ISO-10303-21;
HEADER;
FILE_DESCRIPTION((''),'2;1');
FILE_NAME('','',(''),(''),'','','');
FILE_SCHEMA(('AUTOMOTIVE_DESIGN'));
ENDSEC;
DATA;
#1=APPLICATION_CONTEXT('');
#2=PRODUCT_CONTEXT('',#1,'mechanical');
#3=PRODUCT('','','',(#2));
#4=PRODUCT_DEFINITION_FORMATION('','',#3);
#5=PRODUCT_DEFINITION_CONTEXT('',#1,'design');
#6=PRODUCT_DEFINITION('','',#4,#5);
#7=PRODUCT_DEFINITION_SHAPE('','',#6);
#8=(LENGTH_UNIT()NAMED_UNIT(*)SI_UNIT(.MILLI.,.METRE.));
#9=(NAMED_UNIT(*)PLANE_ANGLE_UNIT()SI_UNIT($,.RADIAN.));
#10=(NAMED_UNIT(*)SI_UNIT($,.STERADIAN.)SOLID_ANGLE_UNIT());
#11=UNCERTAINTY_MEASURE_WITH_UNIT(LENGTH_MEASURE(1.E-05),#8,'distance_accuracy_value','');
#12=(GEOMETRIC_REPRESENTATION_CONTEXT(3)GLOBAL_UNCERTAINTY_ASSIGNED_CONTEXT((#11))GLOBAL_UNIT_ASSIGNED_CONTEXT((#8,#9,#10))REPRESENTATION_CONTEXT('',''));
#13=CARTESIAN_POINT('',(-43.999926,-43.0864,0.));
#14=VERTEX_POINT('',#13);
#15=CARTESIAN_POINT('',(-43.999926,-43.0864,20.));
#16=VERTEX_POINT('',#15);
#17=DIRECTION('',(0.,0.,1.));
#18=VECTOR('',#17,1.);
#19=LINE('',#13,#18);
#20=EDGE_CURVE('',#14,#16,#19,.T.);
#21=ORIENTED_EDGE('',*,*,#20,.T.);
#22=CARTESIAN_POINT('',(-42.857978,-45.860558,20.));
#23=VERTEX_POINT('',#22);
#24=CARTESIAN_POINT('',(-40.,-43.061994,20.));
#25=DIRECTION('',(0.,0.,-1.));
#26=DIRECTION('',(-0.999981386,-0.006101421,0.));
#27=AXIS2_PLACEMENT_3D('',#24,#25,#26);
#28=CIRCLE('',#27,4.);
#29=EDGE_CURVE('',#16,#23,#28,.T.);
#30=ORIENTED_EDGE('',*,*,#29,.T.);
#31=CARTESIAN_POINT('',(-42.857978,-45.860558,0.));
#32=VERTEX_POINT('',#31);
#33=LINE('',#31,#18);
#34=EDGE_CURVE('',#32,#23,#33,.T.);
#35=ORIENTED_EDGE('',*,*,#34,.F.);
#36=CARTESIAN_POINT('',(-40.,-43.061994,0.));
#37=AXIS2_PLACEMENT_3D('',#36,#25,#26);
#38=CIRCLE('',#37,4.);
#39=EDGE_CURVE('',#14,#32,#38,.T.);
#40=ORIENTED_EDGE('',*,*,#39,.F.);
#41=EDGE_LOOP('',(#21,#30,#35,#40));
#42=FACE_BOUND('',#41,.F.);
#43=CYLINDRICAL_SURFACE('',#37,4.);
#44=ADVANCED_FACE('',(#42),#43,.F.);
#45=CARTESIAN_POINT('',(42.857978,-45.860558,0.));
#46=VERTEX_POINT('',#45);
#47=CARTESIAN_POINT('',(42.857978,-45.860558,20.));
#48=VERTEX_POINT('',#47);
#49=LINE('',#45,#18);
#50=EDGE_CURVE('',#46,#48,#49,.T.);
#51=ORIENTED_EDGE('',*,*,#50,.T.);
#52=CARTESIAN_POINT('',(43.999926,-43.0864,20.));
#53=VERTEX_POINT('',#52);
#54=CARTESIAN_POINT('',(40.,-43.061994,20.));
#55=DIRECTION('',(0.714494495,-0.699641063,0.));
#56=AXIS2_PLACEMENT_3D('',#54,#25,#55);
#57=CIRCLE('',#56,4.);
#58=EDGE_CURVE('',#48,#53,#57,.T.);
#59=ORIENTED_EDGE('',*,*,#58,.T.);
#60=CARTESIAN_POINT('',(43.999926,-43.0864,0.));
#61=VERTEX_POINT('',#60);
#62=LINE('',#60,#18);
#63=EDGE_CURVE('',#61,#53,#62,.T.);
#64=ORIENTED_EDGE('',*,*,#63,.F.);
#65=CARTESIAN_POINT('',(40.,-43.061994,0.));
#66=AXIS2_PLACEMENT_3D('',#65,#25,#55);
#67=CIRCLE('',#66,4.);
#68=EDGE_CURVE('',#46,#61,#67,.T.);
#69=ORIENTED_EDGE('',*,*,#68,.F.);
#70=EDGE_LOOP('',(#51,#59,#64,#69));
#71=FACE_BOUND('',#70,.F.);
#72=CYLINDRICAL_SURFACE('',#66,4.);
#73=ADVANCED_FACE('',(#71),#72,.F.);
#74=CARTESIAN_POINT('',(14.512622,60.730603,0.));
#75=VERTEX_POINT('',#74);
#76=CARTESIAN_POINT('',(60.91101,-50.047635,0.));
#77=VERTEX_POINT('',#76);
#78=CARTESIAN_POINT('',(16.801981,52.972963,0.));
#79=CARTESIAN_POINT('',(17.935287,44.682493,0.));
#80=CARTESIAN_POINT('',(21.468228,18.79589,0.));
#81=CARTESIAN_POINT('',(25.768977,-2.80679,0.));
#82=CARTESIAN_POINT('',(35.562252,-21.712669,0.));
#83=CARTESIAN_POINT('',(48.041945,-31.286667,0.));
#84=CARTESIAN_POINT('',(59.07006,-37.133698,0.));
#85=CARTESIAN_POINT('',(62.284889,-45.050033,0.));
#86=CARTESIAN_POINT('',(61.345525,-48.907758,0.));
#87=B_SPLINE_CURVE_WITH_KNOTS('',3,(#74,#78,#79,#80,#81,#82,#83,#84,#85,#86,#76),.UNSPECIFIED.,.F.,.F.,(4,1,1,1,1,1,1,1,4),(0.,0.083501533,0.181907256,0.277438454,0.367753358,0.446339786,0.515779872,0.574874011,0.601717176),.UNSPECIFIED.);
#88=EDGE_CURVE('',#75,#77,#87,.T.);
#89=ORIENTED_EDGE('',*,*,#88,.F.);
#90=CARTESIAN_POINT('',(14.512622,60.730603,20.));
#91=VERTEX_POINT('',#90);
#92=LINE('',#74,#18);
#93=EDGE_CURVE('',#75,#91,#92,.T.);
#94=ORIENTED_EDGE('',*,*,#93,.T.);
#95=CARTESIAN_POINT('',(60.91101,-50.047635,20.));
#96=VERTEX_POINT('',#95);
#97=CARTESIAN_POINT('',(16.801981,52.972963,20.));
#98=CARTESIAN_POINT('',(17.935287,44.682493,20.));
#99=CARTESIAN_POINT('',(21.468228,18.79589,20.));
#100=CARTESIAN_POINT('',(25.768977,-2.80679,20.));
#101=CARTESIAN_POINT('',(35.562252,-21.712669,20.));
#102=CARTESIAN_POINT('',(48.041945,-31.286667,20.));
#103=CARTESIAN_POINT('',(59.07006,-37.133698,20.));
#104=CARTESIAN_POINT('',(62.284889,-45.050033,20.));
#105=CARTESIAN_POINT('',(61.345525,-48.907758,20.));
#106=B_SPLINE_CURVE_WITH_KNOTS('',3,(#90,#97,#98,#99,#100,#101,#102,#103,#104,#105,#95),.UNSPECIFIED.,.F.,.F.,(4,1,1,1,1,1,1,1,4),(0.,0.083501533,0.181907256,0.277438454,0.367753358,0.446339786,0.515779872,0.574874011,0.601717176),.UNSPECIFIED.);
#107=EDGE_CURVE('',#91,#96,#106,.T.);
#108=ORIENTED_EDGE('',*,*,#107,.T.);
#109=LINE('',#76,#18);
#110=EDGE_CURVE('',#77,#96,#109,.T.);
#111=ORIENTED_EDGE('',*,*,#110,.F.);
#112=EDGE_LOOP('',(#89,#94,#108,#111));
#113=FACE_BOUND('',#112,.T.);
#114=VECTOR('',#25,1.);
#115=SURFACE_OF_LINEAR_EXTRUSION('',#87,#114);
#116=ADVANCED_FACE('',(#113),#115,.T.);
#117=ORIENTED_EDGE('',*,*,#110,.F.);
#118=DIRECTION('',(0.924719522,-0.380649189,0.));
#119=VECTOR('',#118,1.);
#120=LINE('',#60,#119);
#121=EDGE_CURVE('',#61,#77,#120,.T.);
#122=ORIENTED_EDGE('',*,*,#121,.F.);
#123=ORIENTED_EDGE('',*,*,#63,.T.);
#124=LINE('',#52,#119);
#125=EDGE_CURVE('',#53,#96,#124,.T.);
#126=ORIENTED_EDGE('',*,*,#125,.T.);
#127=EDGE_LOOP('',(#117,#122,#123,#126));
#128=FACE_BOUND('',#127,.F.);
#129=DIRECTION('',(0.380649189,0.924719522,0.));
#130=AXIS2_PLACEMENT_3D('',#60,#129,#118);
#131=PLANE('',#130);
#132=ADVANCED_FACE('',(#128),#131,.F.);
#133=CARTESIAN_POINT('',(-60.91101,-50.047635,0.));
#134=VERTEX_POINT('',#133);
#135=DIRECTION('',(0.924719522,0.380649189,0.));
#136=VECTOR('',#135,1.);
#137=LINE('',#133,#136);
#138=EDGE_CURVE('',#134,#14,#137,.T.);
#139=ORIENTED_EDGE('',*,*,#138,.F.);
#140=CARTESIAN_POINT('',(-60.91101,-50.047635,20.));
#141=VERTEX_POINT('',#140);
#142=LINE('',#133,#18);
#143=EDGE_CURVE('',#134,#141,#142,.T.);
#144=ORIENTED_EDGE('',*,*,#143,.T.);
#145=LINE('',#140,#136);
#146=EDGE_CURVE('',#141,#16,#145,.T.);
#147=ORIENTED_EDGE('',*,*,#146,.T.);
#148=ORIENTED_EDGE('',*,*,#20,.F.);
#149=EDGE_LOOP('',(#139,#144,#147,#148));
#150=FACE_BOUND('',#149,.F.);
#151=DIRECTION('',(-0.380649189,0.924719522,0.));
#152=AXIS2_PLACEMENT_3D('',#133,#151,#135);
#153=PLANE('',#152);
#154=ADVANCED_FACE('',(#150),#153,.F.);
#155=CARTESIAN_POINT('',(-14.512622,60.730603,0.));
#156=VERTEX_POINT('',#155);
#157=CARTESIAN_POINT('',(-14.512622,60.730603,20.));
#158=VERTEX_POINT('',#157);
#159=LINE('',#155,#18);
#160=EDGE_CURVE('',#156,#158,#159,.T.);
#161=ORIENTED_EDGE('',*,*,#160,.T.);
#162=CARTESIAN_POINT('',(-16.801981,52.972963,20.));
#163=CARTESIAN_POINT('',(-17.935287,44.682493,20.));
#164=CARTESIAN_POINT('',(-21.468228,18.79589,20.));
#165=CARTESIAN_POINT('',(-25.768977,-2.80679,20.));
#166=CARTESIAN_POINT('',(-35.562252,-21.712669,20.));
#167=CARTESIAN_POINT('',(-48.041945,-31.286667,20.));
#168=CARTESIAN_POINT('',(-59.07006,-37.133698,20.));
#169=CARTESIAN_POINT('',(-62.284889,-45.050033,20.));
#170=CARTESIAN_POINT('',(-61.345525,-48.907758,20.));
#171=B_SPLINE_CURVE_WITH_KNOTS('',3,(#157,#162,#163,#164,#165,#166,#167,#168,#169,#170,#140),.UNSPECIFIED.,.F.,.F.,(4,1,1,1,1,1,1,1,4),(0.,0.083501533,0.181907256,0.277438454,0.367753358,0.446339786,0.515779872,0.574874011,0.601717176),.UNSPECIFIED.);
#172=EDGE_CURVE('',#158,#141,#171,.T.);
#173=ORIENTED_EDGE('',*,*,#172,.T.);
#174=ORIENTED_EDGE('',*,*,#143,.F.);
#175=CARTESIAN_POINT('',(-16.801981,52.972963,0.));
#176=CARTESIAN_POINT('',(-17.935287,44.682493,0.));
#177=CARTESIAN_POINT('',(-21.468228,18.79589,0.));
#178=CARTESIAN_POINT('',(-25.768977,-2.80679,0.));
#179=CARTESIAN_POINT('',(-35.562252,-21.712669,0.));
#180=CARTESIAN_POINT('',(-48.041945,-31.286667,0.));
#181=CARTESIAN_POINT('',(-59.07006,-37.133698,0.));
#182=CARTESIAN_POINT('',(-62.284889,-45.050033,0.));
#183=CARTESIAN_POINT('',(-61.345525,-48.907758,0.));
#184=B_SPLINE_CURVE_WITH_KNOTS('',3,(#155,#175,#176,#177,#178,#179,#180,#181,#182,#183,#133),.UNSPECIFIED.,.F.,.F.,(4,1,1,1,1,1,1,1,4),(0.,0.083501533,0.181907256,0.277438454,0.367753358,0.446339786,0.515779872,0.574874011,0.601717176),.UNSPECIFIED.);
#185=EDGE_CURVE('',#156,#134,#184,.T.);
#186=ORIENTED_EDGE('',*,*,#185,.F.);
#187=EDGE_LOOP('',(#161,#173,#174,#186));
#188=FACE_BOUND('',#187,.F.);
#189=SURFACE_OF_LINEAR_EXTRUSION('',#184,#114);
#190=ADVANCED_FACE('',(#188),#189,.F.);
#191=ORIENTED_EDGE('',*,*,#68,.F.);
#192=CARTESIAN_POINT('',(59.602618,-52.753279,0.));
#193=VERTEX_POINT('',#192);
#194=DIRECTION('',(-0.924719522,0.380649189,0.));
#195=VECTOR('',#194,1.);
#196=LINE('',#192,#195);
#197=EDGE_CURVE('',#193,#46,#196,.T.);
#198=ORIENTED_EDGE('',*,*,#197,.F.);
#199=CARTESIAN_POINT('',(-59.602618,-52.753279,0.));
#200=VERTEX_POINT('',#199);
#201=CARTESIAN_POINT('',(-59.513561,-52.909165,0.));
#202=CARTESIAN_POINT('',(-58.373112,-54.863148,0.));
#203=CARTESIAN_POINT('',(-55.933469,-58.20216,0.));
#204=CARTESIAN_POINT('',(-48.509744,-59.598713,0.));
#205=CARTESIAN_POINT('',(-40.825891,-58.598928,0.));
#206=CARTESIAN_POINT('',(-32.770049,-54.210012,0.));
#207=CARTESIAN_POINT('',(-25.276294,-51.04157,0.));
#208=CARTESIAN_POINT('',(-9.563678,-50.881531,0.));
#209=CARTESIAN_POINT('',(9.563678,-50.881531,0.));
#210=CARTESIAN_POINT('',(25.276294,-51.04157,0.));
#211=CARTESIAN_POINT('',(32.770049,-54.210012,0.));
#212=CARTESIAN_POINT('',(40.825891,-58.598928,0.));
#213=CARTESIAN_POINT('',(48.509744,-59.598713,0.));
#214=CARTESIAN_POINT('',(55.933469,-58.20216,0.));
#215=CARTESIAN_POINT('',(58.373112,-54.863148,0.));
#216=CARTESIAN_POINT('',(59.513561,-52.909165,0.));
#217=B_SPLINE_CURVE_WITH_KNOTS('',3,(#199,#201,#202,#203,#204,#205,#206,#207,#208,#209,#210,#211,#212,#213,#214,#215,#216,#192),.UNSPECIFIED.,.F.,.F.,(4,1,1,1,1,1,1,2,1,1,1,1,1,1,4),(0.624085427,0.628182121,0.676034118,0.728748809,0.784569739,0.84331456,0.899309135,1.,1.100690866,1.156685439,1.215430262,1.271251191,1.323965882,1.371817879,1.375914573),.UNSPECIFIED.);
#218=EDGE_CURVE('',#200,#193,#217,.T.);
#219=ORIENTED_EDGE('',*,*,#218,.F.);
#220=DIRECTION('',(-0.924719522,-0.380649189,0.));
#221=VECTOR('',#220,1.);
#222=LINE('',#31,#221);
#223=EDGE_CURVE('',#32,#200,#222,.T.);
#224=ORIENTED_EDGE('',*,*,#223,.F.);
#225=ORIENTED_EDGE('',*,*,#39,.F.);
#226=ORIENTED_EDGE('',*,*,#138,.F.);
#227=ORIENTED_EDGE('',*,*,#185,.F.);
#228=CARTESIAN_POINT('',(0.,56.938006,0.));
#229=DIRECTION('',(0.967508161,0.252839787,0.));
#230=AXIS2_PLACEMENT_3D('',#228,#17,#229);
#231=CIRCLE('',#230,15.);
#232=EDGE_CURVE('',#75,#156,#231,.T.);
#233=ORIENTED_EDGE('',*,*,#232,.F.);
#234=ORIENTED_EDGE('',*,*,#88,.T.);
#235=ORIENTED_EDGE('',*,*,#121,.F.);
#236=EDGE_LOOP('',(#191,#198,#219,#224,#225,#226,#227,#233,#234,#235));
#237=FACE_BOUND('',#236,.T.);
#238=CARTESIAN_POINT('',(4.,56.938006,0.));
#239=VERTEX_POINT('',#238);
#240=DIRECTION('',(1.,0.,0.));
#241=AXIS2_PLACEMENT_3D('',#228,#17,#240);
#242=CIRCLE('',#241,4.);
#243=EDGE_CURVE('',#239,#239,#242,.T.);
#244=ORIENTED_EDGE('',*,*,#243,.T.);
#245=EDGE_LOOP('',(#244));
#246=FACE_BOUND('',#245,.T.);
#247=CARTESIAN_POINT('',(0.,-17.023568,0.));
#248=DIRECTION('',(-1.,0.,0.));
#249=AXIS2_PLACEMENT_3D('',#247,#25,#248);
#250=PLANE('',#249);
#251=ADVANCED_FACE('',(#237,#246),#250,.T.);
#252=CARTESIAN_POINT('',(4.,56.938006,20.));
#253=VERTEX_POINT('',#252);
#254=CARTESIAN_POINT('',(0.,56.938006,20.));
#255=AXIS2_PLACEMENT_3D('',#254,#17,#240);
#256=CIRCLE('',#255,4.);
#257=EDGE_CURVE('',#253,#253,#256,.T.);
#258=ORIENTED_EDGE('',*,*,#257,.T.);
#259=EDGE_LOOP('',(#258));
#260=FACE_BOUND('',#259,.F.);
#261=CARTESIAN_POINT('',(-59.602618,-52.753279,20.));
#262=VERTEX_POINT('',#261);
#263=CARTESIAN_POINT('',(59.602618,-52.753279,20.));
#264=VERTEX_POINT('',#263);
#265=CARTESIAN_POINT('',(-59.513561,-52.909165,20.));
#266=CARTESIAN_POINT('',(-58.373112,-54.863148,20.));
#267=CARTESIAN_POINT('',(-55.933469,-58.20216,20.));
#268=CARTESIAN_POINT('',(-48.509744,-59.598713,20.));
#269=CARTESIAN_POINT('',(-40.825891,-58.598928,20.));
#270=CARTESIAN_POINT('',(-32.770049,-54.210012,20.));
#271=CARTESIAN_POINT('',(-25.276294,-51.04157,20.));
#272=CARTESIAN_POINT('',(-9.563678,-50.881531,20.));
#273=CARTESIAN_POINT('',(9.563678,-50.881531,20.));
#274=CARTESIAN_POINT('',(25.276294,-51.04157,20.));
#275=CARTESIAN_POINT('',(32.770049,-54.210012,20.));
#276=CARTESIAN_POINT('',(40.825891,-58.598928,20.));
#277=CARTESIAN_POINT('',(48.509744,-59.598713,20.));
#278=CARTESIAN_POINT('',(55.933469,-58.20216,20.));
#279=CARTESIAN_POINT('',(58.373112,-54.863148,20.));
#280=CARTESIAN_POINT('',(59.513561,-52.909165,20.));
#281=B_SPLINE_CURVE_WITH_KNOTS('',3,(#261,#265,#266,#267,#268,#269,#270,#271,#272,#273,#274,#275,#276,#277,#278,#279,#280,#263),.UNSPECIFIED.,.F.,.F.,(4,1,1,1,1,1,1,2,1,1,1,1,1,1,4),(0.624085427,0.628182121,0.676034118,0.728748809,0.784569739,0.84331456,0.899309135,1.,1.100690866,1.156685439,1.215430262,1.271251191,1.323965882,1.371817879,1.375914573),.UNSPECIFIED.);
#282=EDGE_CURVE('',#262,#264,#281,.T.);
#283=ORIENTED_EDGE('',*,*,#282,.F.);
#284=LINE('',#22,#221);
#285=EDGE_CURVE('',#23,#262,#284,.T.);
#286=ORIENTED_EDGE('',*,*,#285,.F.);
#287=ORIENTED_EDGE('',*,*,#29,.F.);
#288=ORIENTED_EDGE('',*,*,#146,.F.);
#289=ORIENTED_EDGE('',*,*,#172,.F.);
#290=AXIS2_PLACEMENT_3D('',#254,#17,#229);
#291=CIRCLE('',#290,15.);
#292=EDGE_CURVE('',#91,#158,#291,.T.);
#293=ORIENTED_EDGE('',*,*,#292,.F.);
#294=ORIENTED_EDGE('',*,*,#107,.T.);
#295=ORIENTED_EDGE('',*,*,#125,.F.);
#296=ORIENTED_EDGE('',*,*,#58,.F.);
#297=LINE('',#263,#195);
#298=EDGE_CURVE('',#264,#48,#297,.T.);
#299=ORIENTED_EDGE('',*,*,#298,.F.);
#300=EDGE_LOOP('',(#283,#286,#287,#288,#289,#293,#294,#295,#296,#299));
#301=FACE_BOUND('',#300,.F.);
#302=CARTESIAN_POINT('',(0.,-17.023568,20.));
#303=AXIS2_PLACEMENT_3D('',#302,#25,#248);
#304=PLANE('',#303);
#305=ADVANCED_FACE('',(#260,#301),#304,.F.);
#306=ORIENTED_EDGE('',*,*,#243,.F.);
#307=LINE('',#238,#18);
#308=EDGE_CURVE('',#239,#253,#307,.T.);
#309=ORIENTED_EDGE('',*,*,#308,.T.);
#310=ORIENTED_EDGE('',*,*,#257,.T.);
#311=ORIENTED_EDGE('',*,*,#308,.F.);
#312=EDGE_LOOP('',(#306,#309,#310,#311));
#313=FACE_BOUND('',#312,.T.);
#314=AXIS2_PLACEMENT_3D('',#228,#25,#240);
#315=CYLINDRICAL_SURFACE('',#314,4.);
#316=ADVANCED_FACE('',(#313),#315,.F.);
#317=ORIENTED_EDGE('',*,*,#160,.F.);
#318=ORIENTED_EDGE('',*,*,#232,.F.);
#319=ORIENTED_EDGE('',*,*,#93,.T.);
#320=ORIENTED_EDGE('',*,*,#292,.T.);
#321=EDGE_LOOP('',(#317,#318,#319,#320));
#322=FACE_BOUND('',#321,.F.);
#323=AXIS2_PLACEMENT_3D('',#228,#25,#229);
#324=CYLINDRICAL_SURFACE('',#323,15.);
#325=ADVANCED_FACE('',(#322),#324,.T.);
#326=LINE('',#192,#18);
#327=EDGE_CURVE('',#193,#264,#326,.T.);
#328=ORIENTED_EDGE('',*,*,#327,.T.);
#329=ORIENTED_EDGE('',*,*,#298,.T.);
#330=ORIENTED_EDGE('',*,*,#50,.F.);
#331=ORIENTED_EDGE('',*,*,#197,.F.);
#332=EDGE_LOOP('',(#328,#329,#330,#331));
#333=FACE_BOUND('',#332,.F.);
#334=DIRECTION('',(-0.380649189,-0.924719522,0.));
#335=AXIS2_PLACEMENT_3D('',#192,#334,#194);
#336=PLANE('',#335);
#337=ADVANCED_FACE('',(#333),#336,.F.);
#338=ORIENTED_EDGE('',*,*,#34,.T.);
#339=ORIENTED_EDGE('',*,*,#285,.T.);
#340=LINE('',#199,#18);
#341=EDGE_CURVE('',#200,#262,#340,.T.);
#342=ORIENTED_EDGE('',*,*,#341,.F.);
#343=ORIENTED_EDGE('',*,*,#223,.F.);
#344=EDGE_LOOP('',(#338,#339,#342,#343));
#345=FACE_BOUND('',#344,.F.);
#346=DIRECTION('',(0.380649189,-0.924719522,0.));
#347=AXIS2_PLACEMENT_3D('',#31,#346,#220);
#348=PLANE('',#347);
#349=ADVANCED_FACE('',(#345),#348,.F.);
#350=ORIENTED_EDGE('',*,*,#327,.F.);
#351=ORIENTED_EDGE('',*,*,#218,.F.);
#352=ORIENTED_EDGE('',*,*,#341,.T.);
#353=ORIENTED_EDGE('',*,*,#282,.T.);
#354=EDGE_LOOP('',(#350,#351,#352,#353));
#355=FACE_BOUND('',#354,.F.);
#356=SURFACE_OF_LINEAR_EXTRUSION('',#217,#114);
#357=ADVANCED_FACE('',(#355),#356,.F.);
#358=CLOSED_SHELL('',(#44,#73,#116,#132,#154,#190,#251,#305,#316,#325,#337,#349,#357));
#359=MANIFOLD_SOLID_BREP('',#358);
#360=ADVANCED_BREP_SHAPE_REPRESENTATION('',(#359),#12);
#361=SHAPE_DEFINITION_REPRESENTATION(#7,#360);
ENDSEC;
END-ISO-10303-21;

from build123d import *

# Parameters (mm, degrees)
F0_R     = 4
F1_DEPTH = 20


# Not quite as in the source:
# - a feature names something its author has since deleted; it is built from what else it names


with BuildPart() as f1:
    # F0 (on Top) → F1 (new body)
    with BuildSketch(Plane.XY):
        with BuildLine():
            add(Edge.make_bspline(
                [(14.5126224198, 60.7306027855), (16.8019810413, 52.9729625014), (17.9352869071, 44.6824925706), (21.4682283194, 18.795889632), (25.7689771102, -2.8067896835), (35.5622516207, -21.7126685978), (48.041945088, -31.286667461), (59.0700601288, -37.1336977452), (62.2848892569, -45.05003275), (61.3455249019, -48.9077577206), (60.9110098166, -50.047635349)],
                knots=[0, 0, 0, 0, 0.0835015327, 0.1819072556, 0.277438454, 0.367753358, 0.4463397859, 0.5157798719, 0.5748740106, 0.6017171757, 0.6017171757, 0.6017171757, 0.6017171757], degree=3))
            ThreePointArc((14.5126224198, 60.7306027855), (0, 71.9380059838), (-14.5126224198, 60.7306027855))
            add(Edge.make_bspline(
                [(-14.5126224198, 60.7306027855), (-16.8019810413, 52.9729625014), (-17.9352869071, 44.6824925706), (-21.4682283194, 18.795889632), (-25.7689771102, -2.8067896835), (-35.5622516207, -21.7126685978), (-48.041945088, -31.286667461), (-59.0700601288, -37.1336977452), (-62.2848892569, -45.05003275), (-61.3455249019, -48.9077577206), (-60.9110098166, -50.047635349)],
                knots=[0, 0, 0, 0, 0.0835015327, 0.1819072556, 0.277438454, 0.367753358, 0.4463397859, 0.5157798719, 0.5748740106, 0.6017171757, 0.6017171757, 0.6017171757, 0.6017171757], degree=3))
            Line((-60.9110098166, -50.047635349), (-43.9999255446, -43.0863997004))
            ThreePointArc((-43.9999255446, -43.0863997004), (-36.30112191, -41.5393972621), (-42.8579779791, -45.8605582679))
            Line((-42.8579779791, -45.8605582679), (-59.6026177667, -52.753279133))
            add(Edge.make_bspline(
                [(-59.6026177667, -52.753279133), (-59.5135605178, -52.9091652101), (-58.3731115182, -54.8631475989), (-55.9334692098, -58.202160494), (-48.5097440275, -59.5987131413), (-40.8258914603, -58.598927537), (-32.7700485865, -54.2100123222), (-25.276293749, -51.041569904), (-9.563678396, -50.8815310895), (0, -50.8815310895)],
                knots=[0.6240854269, 0.6240854269, 0.6240854269, 0.6240854269, 0.6281821208, 0.6760341184, 0.7287488094, 0.7845697385, 0.8433145605, 0.8993091345, 1, 1, 1, 1], degree=3))
            add(Edge.make_bspline(
                [(59.6026177667, -52.753279133), (59.5135605178, -52.9091652101), (58.3731115182, -54.8631475989), (55.9334692098, -58.202160494), (48.5097440275, -59.5987131413), (40.8258914603, -58.598927537), (32.7700485865, -54.2100123222), (25.276293749, -51.041569904), (9.563678396, -50.8815310895), (0, -50.8815310895)],
                knots=[0.6240854269, 0.6240854269, 0.6240854269, 0.6240854269, 0.6281821208, 0.6760341184, 0.7287488094, 0.7845697385, 0.8433145605, 0.8993091345, 1, 1, 1, 1], degree=3))
            Line((59.6026177667, -52.753279133), (42.8579779791, -45.8605582679))
            ThreePointArc((42.8579779791, -45.8605582679), (36.30112191, -41.5393972621), (43.9999255446, -43.0863997004))
            Line((43.9999255446, -43.0863997004), (60.9110098166, -50.047635349))
        make_face()
        with Locations((0, 56.9380059838)):
            Circle(F0_R, mode=Mode.SUBTRACT)
    extrude(amount=F1_DEPTH)


solid = f1.part
